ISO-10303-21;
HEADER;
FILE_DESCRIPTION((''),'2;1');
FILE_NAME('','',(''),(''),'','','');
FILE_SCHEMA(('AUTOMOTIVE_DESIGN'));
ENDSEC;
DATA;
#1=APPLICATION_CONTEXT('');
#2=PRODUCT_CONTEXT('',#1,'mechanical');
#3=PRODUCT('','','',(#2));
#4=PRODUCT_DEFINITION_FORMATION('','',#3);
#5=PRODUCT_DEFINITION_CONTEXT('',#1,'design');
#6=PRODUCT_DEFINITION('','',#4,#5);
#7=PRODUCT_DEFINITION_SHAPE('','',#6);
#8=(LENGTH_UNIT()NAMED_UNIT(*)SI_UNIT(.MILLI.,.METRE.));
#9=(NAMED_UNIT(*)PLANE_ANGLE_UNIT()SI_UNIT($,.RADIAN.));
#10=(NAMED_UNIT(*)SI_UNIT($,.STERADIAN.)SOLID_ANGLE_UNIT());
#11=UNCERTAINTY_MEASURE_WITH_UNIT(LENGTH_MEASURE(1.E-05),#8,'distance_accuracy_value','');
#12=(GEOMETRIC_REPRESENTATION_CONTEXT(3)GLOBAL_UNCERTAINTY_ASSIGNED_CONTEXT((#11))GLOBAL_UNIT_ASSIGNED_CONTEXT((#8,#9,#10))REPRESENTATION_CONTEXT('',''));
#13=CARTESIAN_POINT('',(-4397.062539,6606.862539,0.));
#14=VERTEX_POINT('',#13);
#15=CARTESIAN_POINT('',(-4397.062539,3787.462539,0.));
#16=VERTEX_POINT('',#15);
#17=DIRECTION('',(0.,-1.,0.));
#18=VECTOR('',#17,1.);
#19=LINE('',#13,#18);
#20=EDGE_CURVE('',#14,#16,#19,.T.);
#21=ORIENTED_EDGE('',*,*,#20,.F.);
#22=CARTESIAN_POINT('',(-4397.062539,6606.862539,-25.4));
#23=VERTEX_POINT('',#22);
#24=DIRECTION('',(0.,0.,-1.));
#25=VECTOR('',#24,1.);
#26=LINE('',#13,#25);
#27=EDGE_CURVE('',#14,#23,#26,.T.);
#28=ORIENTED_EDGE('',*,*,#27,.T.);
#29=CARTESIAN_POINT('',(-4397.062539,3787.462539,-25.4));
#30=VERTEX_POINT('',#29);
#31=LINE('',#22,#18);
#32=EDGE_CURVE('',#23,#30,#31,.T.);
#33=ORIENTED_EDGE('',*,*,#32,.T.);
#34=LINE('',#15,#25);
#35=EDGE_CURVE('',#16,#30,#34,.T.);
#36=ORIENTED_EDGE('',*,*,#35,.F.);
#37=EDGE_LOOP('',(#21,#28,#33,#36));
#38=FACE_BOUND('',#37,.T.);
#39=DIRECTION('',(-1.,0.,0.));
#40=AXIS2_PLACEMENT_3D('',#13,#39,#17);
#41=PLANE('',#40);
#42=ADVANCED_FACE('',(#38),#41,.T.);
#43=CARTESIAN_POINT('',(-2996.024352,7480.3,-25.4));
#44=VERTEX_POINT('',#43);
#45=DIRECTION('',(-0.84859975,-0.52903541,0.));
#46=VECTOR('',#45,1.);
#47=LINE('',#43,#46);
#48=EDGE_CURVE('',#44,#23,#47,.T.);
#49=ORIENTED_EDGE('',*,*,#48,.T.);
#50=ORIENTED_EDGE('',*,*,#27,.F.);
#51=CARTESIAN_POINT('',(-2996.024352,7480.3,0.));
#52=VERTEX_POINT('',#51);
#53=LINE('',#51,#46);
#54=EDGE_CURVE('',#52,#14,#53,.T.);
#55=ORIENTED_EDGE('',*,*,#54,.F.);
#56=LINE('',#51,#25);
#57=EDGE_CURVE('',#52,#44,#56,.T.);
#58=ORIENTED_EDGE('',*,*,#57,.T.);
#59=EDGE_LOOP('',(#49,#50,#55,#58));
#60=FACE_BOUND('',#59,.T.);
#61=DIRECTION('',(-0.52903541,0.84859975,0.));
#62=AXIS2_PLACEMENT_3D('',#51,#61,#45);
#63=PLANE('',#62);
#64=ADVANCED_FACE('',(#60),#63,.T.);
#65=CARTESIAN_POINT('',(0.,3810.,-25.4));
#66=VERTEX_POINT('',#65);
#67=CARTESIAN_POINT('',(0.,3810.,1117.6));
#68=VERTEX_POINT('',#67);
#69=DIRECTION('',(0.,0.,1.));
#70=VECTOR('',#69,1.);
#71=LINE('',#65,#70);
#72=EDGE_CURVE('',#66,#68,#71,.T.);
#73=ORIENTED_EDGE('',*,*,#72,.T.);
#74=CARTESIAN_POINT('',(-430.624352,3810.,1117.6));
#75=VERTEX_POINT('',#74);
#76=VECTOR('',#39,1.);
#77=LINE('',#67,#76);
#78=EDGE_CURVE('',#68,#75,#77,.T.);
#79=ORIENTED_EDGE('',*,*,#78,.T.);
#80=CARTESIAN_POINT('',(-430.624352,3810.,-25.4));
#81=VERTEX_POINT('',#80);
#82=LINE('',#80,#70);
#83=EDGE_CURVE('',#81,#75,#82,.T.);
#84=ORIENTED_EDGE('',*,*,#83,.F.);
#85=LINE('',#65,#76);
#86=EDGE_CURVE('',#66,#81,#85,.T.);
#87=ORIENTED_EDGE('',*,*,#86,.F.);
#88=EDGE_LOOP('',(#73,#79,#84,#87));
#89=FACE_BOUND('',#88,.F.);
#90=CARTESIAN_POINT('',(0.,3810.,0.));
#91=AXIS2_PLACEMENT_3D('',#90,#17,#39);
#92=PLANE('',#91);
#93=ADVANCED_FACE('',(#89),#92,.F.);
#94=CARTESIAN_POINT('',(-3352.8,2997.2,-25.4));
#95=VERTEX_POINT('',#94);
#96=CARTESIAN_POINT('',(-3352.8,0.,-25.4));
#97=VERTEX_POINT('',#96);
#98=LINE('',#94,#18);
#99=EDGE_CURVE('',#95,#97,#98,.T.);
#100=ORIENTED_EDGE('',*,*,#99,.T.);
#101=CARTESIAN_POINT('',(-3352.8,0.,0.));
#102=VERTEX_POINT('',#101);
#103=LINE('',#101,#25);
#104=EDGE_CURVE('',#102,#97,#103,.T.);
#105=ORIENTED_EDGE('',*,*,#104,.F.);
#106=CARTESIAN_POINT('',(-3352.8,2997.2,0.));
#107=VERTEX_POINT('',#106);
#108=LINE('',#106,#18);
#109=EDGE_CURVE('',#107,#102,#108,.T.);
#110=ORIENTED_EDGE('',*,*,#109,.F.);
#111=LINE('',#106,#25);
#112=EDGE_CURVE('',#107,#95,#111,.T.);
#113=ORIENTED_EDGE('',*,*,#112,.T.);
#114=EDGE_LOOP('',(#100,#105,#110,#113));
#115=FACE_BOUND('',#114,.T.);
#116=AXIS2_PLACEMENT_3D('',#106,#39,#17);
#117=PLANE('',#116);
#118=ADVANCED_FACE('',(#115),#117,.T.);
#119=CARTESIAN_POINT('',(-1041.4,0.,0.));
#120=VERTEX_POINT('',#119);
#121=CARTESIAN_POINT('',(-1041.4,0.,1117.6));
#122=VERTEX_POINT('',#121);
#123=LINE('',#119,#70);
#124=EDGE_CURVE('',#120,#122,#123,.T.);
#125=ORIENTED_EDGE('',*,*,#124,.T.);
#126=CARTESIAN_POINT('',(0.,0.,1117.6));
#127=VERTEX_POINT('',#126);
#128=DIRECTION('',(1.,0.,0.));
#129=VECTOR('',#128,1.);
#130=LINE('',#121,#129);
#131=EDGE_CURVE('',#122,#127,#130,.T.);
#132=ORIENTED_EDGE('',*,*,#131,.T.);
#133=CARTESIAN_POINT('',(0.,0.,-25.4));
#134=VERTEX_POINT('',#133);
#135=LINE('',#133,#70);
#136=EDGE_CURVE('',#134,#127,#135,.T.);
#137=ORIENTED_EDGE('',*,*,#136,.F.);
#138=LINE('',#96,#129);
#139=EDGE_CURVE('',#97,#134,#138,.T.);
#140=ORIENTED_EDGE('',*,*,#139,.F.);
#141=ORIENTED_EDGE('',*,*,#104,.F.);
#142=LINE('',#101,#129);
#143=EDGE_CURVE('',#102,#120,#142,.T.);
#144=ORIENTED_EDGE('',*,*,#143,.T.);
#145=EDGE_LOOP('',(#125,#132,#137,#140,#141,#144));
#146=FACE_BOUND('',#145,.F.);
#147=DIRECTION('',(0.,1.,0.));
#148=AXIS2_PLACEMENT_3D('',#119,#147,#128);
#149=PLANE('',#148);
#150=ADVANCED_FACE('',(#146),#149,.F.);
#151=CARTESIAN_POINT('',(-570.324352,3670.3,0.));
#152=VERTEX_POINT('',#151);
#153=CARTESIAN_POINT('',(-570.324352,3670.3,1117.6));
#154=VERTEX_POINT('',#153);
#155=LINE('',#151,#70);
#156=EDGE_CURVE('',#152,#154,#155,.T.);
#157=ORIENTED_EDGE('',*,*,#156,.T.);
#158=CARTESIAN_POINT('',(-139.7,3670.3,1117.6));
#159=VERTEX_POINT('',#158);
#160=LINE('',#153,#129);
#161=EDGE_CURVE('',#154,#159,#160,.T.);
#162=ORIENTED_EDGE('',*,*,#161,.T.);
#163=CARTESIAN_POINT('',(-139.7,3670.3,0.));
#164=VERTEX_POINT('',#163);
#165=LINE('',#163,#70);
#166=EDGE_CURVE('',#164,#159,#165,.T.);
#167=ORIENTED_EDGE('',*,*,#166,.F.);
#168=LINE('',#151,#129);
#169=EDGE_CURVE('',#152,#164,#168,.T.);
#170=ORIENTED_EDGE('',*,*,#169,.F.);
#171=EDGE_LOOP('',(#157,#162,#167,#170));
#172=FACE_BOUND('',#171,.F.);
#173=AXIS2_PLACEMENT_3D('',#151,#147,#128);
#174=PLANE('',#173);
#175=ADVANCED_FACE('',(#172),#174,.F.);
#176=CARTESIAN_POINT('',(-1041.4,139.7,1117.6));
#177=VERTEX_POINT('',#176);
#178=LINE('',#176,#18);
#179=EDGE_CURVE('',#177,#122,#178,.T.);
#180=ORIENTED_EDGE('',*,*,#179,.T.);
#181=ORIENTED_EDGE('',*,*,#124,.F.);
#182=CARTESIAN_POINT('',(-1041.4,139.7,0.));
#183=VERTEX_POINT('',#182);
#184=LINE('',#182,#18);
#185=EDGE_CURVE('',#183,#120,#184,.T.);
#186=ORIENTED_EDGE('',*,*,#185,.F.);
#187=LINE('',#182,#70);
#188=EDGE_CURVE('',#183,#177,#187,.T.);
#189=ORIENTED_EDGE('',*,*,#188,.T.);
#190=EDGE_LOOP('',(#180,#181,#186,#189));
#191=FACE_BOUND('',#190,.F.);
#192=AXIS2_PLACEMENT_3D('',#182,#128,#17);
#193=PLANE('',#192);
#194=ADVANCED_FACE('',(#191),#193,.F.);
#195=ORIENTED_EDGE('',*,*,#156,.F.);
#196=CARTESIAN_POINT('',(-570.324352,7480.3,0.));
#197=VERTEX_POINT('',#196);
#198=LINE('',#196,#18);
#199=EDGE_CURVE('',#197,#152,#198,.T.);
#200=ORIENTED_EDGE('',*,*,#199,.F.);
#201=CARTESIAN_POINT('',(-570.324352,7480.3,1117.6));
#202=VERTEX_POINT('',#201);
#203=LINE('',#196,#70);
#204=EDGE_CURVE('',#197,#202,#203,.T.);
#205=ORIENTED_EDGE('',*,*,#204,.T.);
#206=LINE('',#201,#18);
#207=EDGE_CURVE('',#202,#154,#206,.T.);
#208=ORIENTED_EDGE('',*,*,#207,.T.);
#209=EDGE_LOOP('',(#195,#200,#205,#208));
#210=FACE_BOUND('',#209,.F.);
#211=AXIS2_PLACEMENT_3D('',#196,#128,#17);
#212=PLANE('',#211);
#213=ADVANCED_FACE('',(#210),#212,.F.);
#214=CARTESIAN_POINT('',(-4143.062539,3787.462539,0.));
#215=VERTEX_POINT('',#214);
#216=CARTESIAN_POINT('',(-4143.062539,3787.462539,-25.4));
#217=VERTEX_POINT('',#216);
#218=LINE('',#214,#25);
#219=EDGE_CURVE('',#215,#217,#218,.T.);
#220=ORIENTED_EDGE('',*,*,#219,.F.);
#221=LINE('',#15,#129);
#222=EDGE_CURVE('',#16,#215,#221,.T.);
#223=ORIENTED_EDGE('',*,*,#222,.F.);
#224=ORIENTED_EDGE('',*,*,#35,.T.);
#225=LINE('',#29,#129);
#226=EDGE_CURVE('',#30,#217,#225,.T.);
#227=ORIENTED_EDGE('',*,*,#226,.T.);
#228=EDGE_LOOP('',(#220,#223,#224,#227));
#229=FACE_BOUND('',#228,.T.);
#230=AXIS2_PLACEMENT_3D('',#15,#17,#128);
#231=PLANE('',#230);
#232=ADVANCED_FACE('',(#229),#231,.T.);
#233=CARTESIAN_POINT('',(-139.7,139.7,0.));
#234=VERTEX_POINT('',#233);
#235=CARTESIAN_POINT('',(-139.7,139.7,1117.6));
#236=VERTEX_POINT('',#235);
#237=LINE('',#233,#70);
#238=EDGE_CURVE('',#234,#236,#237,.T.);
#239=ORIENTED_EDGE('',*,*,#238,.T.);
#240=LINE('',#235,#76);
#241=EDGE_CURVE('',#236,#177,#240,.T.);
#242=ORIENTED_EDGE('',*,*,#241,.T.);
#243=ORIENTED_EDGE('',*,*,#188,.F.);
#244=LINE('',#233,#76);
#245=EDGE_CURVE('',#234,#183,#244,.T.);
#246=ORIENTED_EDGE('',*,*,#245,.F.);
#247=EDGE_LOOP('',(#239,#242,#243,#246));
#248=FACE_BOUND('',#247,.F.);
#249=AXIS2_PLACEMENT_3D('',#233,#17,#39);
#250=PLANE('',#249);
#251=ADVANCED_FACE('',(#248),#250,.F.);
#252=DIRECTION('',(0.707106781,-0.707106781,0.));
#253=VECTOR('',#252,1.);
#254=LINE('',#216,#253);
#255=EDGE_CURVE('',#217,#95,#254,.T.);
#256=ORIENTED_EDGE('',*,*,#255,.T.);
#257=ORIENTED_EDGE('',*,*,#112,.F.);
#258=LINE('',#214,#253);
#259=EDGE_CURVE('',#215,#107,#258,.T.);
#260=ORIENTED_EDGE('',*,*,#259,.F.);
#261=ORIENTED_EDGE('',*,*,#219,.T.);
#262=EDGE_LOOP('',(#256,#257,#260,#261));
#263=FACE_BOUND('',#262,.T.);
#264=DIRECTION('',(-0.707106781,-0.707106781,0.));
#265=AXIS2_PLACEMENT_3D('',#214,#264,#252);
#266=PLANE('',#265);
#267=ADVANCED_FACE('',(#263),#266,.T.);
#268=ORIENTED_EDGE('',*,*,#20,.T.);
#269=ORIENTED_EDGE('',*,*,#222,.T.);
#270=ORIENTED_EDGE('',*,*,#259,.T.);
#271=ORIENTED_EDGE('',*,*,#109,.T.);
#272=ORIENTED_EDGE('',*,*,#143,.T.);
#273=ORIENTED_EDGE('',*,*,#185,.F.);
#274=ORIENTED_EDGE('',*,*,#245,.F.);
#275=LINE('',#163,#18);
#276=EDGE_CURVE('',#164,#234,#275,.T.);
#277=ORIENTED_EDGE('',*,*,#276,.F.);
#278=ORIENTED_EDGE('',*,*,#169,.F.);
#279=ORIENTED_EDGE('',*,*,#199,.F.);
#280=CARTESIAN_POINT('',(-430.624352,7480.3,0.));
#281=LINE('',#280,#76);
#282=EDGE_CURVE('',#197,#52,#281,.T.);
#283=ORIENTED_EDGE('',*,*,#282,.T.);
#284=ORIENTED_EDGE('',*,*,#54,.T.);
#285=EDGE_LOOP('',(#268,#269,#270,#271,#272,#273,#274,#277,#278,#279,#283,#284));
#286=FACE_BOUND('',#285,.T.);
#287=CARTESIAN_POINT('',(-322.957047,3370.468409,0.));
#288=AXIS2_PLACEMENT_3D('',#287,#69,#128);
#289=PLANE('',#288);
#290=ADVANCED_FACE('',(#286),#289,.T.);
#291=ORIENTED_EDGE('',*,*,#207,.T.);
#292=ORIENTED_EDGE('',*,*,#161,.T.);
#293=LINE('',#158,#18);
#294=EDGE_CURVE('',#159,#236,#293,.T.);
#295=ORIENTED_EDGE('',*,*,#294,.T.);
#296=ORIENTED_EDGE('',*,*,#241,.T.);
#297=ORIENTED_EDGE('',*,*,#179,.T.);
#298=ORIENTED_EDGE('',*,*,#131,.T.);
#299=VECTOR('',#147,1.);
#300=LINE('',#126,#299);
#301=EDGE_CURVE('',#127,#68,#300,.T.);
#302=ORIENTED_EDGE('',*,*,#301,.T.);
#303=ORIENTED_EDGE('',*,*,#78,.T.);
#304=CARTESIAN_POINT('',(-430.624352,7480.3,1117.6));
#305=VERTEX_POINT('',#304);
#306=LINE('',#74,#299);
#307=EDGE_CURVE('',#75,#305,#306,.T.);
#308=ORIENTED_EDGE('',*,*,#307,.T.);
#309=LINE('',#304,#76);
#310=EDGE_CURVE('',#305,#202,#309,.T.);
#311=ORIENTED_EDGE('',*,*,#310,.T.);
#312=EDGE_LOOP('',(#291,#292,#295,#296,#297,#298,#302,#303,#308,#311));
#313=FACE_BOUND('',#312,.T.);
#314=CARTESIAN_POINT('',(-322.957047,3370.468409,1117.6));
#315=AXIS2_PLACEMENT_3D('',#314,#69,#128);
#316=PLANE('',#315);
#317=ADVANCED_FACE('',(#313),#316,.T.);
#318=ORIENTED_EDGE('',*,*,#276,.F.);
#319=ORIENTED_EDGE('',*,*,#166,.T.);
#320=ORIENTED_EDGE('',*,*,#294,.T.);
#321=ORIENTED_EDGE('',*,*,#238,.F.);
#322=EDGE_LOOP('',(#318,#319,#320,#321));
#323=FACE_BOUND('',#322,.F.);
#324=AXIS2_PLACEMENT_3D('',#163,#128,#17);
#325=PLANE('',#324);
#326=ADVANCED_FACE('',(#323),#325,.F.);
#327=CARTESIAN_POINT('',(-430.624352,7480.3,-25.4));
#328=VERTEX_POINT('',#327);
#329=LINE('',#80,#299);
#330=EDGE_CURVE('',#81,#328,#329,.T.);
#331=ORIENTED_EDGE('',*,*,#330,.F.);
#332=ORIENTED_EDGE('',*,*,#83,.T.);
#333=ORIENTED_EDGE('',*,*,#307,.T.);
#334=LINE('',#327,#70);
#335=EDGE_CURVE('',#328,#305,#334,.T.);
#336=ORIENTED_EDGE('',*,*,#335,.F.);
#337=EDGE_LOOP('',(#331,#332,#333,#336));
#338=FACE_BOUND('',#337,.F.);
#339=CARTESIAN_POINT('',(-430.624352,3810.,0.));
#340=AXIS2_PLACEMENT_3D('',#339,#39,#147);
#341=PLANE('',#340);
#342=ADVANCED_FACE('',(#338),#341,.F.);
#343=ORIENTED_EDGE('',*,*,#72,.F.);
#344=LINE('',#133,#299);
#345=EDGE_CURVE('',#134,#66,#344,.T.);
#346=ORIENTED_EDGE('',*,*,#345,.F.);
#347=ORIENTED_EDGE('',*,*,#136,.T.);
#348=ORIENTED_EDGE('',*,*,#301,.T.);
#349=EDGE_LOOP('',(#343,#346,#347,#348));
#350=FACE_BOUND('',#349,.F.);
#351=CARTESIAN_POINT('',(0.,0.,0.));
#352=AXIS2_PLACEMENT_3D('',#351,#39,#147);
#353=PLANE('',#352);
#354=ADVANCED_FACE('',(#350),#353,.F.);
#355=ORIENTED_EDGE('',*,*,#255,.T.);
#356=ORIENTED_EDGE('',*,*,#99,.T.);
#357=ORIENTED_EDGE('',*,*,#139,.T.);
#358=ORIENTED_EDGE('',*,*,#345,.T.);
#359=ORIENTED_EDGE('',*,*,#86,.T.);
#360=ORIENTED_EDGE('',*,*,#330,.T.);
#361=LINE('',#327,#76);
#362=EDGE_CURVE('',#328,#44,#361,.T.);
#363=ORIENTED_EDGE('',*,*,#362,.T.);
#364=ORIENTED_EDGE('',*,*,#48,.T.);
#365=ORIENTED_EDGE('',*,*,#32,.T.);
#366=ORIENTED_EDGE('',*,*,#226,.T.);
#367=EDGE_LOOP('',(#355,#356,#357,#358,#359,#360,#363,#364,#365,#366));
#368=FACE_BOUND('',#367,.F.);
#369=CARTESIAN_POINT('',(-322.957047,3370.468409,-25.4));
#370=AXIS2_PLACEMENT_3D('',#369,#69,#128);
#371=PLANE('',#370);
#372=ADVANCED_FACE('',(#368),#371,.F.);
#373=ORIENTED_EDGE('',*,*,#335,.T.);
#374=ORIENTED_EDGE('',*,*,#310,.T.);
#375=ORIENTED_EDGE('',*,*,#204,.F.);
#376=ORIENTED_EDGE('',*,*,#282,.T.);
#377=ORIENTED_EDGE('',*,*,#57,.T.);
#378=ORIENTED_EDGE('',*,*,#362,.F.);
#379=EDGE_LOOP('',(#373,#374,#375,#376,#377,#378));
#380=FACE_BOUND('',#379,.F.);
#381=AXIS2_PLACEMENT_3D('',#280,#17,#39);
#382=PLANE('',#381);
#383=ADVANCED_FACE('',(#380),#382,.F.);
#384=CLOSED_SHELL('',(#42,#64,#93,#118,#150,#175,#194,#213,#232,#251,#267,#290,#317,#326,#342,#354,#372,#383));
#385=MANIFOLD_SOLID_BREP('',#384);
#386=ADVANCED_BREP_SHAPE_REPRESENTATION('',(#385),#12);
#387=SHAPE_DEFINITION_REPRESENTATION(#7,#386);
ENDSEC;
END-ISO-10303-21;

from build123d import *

# Parameters (mm, degrees)
F1_DEPTH = 25.4
F2_DEPTH = 1117.6


# Not quite as in the source:
# - the program builds the solid bodies; features that only make, move or delete a surface that nothing else refers to are left out


with BuildPart() as f1:
    # F0 (on Top) → F1 (new body)
    with BuildSketch(Plane.XY):
        Polygon((-1041.4, 0), (0, 0), (0, 3810), (-430.6243517664, 3810), (-430.6243517664, 7480.3), (-570.3243517664, 7480.3), (-570.3243517664, 3810), (-570.3243517664, 3670.3), (-139.7, 3670.3), (-139.7, 139.7), (-1041.4, 139.7), align=None)
        Polygon((-3352.8, 0), (-1041.4, 0), (-1041.4, 139.7), (-139.7, 139.7), (-139.7, 3670.3), (-570.3243517664, 3670.3), (-570.3243517664, 3810), (-570.3243517664, 7480.3), (-2996.0243517664, 7480.3), (-4397.0625386541, 6606.8625386541), (-4397.0625386541, 3787.4625386541), (-4143.0625386541, 3787.4625386541), (-3352.8, 2997.2), align=None)
    extrude(amount=-F1_DEPTH)

    # F0 (on Top) → F2 (join)
    with BuildSketch(Plane.XY):
        Polygon((-1041.4, 0), (0, 0), (0, 3810), (-430.6243517664, 3810), (-430.6243517664, 7480.3), (-570.3243517664, 7480.3), (-570.3243517664, 3810), (-570.3243517664, 3670.3), (-139.7, 3670.3), (-139.7, 139.7), (-1041.4, 139.7), align=None)
    extrude(amount=F2_DEPTH)


solid = f1.part
